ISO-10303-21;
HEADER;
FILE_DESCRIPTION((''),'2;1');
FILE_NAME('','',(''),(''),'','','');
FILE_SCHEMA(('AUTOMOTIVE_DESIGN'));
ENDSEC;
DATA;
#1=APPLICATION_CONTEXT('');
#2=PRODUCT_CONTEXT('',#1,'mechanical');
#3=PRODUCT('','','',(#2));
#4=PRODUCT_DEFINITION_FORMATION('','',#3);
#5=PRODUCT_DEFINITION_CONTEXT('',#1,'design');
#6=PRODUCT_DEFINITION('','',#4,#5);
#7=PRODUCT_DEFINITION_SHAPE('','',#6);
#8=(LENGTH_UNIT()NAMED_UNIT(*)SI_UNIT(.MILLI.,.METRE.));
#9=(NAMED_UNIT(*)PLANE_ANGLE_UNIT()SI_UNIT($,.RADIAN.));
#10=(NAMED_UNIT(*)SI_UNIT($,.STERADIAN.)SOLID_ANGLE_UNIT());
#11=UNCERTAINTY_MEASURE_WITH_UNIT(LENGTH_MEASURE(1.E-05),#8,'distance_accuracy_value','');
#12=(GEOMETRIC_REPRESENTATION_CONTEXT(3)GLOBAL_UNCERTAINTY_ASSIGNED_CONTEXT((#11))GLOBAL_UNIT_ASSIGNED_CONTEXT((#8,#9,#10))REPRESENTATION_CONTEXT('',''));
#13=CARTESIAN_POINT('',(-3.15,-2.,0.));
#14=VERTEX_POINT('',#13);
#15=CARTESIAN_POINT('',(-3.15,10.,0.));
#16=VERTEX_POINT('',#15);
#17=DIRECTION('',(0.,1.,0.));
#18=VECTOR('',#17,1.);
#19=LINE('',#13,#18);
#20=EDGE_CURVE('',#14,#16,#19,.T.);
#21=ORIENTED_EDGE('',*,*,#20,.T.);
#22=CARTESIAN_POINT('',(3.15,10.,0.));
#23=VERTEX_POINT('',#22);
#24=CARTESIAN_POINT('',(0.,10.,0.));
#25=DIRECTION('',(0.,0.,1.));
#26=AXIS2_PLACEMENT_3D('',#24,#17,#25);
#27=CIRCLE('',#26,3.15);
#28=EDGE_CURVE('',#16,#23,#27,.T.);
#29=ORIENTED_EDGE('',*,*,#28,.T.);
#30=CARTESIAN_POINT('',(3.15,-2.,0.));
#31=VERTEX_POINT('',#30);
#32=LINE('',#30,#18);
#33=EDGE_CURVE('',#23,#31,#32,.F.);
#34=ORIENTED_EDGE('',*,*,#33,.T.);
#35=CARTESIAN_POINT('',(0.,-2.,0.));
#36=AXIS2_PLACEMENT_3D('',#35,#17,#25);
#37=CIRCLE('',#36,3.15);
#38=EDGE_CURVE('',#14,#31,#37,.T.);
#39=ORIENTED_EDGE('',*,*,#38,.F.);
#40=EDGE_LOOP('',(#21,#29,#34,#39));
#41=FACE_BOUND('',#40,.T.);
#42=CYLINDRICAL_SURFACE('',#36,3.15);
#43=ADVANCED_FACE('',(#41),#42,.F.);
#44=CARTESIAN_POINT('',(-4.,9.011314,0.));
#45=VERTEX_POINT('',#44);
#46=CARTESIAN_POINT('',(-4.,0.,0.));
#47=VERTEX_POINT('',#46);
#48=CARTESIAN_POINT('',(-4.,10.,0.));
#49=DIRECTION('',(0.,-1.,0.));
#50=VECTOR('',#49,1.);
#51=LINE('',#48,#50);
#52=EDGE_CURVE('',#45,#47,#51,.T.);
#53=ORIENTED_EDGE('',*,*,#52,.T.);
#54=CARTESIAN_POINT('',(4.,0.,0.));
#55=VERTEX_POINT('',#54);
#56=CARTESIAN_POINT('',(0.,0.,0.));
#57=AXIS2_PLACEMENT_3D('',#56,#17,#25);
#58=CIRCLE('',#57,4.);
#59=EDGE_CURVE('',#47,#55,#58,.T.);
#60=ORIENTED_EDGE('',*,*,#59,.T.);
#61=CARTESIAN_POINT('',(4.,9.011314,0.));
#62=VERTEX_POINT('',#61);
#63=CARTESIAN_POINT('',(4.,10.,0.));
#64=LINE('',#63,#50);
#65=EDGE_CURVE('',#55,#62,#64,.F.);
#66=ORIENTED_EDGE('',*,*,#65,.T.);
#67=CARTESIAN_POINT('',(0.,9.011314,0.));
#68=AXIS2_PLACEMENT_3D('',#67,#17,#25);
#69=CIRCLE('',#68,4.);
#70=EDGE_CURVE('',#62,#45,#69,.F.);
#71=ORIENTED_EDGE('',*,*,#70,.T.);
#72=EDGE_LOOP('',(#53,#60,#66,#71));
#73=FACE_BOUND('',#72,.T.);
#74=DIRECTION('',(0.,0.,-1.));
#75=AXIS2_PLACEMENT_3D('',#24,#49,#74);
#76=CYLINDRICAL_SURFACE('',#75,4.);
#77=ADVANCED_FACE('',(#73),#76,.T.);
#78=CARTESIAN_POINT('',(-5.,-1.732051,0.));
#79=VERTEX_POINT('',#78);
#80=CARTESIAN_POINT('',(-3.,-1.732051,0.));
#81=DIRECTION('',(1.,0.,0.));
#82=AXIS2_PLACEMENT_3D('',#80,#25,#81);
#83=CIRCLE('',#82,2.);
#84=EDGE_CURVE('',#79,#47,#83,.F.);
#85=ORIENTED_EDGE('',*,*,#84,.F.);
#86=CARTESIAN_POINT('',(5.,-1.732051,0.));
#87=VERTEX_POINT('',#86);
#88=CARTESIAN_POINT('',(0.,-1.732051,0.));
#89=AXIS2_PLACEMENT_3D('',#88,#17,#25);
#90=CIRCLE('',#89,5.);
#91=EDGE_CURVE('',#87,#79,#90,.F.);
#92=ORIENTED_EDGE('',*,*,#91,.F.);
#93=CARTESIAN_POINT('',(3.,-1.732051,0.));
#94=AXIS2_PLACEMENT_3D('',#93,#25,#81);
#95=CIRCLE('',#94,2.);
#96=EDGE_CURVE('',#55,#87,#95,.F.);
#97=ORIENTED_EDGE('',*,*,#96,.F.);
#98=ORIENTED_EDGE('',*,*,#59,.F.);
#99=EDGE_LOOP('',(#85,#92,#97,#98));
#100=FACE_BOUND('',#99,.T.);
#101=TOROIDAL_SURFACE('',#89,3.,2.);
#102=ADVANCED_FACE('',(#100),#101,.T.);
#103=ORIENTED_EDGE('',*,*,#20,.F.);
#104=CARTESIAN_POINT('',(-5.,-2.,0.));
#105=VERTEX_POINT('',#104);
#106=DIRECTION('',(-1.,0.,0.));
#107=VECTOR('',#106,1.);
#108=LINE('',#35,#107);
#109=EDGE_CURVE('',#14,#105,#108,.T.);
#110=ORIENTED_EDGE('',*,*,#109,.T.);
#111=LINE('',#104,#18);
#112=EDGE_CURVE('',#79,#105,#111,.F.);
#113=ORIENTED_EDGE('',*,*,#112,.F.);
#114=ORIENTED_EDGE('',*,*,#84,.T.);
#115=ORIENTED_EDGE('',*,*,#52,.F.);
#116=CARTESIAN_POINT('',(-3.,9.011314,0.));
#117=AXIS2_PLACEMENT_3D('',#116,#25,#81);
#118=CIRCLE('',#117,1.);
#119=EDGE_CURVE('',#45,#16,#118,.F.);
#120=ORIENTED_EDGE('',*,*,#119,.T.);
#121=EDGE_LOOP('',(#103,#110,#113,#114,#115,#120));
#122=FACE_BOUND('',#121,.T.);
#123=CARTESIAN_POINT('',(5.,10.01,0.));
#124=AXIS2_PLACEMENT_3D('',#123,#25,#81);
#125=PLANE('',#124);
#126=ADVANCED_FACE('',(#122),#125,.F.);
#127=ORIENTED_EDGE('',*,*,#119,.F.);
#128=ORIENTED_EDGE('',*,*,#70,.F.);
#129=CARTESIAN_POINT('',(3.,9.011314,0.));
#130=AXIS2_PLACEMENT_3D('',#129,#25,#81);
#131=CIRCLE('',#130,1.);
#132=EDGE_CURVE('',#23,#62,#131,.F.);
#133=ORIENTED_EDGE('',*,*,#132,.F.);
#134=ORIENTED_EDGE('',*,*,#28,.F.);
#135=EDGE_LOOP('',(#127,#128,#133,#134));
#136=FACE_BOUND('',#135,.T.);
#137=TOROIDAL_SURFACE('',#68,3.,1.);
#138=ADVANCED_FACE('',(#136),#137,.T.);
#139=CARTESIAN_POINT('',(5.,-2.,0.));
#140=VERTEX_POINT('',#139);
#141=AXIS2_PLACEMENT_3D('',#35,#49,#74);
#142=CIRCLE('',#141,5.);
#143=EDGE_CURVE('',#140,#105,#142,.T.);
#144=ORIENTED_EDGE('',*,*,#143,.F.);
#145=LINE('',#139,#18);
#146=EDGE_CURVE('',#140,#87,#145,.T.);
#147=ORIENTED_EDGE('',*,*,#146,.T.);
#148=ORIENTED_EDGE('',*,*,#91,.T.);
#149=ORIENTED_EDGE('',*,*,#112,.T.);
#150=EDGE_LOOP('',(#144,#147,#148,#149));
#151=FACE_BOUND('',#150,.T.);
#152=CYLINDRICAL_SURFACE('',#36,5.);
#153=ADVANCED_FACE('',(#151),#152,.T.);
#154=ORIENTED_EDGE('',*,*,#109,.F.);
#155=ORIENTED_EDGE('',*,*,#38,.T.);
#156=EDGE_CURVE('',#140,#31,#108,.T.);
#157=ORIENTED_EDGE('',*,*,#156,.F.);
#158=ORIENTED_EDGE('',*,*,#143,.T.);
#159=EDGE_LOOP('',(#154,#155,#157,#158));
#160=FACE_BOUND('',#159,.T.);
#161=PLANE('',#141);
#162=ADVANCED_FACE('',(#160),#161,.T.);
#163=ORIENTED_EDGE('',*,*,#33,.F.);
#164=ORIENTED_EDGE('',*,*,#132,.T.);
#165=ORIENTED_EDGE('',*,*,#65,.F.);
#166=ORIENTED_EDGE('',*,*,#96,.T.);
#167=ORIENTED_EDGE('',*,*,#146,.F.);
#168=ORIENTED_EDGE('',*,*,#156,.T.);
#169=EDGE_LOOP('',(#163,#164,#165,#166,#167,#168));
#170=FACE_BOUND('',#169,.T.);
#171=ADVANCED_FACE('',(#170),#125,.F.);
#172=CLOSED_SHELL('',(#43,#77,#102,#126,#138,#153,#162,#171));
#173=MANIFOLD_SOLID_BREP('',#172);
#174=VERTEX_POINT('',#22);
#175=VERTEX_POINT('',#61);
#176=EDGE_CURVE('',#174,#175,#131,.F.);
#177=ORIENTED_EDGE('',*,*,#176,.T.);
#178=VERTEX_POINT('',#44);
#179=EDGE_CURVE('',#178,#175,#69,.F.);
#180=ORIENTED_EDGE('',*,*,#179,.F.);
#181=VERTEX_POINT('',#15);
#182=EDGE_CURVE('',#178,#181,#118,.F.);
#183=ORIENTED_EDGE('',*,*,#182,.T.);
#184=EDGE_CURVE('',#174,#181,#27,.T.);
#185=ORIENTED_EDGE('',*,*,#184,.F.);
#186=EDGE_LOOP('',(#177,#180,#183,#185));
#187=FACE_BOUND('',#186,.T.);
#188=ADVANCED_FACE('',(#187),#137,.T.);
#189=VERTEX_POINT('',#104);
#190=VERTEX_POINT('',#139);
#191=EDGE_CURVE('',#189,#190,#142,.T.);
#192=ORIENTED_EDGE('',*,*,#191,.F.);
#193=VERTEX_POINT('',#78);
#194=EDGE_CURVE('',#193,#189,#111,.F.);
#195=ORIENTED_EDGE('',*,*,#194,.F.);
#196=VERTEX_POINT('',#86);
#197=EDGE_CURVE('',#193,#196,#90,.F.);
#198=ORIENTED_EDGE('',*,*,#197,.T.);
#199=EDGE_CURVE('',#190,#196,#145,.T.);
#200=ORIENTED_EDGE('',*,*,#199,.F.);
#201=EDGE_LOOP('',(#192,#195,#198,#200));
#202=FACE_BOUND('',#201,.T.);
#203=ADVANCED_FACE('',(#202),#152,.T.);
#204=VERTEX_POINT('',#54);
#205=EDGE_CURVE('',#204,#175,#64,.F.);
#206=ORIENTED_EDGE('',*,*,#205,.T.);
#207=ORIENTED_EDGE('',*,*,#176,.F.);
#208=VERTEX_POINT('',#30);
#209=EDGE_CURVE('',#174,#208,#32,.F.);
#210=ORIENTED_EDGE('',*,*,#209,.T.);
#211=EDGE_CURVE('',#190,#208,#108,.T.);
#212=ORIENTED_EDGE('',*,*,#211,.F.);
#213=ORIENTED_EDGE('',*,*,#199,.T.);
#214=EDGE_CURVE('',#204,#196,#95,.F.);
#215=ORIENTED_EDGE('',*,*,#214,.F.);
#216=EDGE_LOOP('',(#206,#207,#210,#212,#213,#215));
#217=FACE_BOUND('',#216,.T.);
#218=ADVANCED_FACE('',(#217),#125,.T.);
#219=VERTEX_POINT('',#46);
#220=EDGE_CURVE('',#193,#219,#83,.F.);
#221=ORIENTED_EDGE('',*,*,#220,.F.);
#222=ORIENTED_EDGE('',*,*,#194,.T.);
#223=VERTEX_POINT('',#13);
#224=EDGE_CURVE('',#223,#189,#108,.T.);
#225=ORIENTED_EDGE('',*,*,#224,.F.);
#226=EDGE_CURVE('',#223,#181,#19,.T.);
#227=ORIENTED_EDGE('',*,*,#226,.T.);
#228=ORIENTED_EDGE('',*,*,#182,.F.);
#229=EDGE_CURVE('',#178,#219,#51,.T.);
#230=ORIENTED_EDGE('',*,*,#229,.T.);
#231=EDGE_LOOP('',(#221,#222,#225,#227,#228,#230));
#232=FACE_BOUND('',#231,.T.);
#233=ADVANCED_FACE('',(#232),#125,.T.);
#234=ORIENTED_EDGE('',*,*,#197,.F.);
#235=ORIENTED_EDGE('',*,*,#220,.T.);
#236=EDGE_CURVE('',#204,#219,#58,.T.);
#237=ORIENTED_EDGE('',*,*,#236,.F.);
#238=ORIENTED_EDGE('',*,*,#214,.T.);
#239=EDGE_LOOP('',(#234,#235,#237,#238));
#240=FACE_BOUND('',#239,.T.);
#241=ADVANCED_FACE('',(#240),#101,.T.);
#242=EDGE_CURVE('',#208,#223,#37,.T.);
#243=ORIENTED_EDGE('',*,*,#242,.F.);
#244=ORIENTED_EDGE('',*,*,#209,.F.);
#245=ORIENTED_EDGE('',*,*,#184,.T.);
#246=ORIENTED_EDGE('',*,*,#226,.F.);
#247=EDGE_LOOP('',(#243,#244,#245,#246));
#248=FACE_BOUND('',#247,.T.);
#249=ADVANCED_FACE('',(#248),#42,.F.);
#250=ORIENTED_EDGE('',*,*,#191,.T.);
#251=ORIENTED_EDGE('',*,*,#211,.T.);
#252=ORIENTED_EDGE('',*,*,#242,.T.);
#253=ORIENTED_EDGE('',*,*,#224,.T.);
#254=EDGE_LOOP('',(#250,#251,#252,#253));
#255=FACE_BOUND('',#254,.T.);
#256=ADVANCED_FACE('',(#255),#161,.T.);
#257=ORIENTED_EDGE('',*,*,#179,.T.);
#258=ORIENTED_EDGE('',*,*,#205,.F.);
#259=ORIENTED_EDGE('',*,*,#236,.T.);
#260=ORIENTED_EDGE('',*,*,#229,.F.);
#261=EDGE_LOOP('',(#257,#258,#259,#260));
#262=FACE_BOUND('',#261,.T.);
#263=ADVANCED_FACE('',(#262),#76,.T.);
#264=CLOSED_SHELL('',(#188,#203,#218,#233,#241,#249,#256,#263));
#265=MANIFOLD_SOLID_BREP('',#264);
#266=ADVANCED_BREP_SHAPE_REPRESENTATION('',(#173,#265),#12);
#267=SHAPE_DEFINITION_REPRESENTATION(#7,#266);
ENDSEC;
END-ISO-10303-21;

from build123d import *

# Parameters (mm, degrees)
SKETCH1_R              = 4
BOSS_EXTRUDE1_DEPTH    = 10
SKETCH6_R              = 5
BOSS_EXTRUDE2_DEPTH    = 2
SKETCH8_R              = 3.15
CUT_EXTRUDE2_DEPTH     = 14.928388277
FILLET1_R              = 2
FILLET2_R              = 1
SPLIT2_SURFACE_1_BACK  = 19.547
SPLIT2_SURFACE_1_DEPTH = 39.094
SPLIT2_SURFACE_2_BACK  = 19.547
SPLIT2_SURFACE_2_DEPTH = 39.094


with BuildPart() as part:
    # Sketch1 → Boss-Extrude1 (new body)
    with BuildSketch(Plane(origin=(0, 0, 0), x_dir=(1, 0, 0), z_dir=(0, 1, 0))):
        with Locations(Location((0, 0, 0), (0, 0, 270))):
            Circle(SKETCH1_R)
    extrude(amount=BOSS_EXTRUDE1_DEPTH)

    # Sketch6 → Boss-Extrude2 (add)
    with BuildSketch(Plane.XZ):
        with Locations(Location((0, 0, 0), (0, 0, 270))):
            Circle(SKETCH6_R)
    extrude(amount=BOSS_EXTRUDE2_DEPTH)

    # Sketch8 → Cut-Extrude2 (cut, through all)
    with BuildSketch(Plane(origin=(0, 10, 0), x_dir=(1, 0, 0), z_dir=(0, 1, 0))):
        with Locations(Location((0, 0, 0), (0, 0, 270))):
            Circle(SKETCH8_R)
    extrude(amount=-CUT_EXTRUDE2_DEPTH, mode=Mode.SUBTRACT)

    # Fillet1
    # the kernel refuses this fillet: 2 mm, written as the material it takes off along each edge
    with BuildSketch(Plane(origin=(0, 0, 0), x_dir=(0, 0, -1), z_dir=(-1, 0, 0))) as fillet1_piece_1:
        with BuildLine():
            CenterArc((3, 1.732050808), FILLET1_R, 300, 60)
            Line((4, 0), (4.02, -0.034641016))
            ThreePointArc((4.02, -0.034641016), (4.5, -0.04), (5, -0.04))
            Line((5, -0.04), (5.04, 0))
            Line((5.04, 0), (5.04, 1.732050808))
            Line((5.04, 1.732050808), (5, 1.732050808))
        make_face()
    revolve(axis=Axis((0, 0, 0), (0, -1, 0)), mode=Mode.SUBTRACT)

    # Fillet2
    # the kernel refuses this fillet: 1 mm, written as the material it takes off along each edge
    with BuildSketch(Plane(origin=(0, 10, 0), x_dir=(0, 0, 1), z_dir=(-1, 0, 0))) as fillet2_piece_1:
        with BuildLine():
            CenterArc((3, -0.988685997), FILLET2_R, 0, 81.373073441)
            Line((3.15, 0), (3.153, 0.01977372))
            ThreePointArc((3.153, 0.01977372), (3.575, 0.02), (4, 0.02))
            Line((4, 0.02), (4.02, 0))
            Line((4.02, 0), (4.02, -0.988685997))
            Line((4.02, -0.988685997), (4, -0.988685997))
        make_face()
    revolve(axis=Axis((0, 10, 0), (0, 1, 0)), mode=Mode.SUBTRACT)


with BuildPart() as body_2:
    # Split2: the piece behind the surface
    add(part.part)
    # Split2 surface: a surface, the sketch's curves swept straight by 39.094 mm
    with BuildLine(Plane(origin=(0, 10, 0), x_dir=(-1, 0, 0), z_dir=(0, -1, 0)).offset(-SPLIT2_SURFACE_1_BACK), mode=Mode.PRIVATE) as split2_surface_1_path:
        Line((-5, 0), (5, 0))
    split2_surface_1 = Shell.extrude(split2_surface_1_path.wire(), (0 * SPLIT2_SURFACE_1_DEPTH, -1 * SPLIT2_SURFACE_1_DEPTH, 0 * SPLIT2_SURFACE_1_DEPTH))
    split(bisect_by=split2_surface_1, keep=Keep.BOTTOM)


with BuildPart() as part_1:
    add(part.part)

    # Split2: split by a surface, the side it looks to stays
    # Split2 surface: a surface, the sketch's curves swept straight by 39.094 mm
    with BuildLine(Plane(origin=(0, 10, 0), x_dir=(-1, 0, 0), z_dir=(0, -1, 0)).offset(-SPLIT2_SURFACE_2_BACK), mode=Mode.PRIVATE) as split2_surface_2_path:
        Line((-5, 0), (5, 0))
    split2_surface_2 = Shell.extrude(split2_surface_2_path.wire(), (0 * SPLIT2_SURFACE_2_DEPTH, -1 * SPLIT2_SURFACE_2_DEPTH, 0 * SPLIT2_SURFACE_2_DEPTH))
    split(bisect_by=split2_surface_2, keep=Keep.TOP)


solid = Compound([body_2.part, part_1.part])
